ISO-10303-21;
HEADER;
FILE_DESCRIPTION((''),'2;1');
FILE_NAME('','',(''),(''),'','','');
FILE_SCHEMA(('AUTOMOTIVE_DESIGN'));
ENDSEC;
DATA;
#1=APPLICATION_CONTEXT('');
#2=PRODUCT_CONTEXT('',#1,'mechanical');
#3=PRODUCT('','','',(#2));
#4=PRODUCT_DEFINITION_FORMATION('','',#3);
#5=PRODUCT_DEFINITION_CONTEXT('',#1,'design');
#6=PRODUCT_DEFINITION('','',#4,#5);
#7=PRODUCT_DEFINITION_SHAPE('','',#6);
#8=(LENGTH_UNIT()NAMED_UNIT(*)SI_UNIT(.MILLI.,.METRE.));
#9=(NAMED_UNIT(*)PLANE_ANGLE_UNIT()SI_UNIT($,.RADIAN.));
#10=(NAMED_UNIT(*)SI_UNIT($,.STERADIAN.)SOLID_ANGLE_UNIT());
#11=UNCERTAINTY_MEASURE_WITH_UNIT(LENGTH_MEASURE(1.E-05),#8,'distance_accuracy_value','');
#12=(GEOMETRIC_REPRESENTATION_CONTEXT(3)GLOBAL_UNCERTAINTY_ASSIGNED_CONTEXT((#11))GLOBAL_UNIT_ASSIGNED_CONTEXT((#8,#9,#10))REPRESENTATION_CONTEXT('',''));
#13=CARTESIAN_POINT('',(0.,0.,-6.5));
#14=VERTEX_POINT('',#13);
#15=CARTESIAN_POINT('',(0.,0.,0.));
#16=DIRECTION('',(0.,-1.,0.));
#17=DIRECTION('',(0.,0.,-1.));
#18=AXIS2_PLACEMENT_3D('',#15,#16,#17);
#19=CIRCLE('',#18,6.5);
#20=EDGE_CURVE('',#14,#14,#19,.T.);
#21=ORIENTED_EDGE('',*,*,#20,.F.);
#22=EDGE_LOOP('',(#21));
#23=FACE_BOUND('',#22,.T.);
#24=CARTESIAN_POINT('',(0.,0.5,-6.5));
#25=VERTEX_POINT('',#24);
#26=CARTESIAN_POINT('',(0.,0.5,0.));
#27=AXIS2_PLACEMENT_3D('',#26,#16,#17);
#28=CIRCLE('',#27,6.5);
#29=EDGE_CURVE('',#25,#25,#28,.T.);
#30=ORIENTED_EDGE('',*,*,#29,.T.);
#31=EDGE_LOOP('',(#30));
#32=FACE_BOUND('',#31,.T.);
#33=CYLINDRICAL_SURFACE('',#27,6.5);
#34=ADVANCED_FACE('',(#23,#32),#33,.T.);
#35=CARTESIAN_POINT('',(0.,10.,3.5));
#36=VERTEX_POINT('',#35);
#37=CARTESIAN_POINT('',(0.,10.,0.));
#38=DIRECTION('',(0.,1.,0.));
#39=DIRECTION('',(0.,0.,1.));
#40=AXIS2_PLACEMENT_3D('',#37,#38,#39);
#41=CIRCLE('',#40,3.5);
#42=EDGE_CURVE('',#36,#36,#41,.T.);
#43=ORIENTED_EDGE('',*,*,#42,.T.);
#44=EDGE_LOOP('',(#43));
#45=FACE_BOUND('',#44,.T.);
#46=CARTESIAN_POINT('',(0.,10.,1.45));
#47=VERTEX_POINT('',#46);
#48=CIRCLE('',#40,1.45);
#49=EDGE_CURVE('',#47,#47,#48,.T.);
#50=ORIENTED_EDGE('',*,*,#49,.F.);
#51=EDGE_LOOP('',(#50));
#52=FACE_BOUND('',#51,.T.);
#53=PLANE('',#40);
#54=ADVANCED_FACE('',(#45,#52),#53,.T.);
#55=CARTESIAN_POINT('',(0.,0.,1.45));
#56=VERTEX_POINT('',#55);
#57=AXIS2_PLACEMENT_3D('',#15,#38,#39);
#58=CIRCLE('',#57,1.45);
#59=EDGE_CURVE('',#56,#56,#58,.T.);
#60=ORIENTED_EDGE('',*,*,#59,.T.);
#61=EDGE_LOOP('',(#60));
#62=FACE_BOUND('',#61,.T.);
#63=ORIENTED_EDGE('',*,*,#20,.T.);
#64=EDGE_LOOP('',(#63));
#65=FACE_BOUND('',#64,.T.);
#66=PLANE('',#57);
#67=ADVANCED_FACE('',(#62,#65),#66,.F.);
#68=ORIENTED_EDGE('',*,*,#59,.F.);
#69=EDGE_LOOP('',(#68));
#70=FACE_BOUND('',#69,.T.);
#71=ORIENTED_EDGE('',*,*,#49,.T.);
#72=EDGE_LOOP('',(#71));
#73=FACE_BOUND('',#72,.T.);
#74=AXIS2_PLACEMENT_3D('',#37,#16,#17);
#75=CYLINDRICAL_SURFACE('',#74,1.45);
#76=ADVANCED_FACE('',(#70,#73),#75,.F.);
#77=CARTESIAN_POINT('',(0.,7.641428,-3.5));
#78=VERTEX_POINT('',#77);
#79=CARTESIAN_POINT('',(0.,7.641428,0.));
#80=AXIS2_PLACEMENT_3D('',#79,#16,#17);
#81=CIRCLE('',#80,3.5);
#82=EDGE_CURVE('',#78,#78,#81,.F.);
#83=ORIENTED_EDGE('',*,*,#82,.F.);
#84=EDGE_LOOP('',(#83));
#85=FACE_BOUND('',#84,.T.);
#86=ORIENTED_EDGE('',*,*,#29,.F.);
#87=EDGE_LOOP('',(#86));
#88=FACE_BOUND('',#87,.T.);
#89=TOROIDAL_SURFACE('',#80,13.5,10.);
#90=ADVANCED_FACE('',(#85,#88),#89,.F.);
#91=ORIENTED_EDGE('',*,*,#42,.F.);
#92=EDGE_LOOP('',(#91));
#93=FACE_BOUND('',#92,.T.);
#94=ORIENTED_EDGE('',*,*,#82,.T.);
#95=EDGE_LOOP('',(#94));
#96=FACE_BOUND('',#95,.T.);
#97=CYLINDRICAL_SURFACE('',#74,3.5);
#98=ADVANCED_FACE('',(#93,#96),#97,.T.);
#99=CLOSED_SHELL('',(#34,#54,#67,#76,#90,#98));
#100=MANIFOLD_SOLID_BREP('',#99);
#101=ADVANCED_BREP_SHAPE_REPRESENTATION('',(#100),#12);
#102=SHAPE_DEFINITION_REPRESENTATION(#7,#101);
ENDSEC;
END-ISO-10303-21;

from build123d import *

# Parameters (mm, degrees)
SKETCH1_R           = 3.5
SKETCH1_R_2         = 1.45
BOSS_EXTRUDE1_DEPTH = 10
SKETCH2_R           = 6.5
SKETCH2_R_2         = 3.5
SKETCH2_R_3         = 1.45
BOSS_EXTRUDE2_DEPTH = 0.5
FILLET1_R           = 10


with BuildPart() as part:
    # Sketch1 → Boss-Extrude1 (new body)
    with BuildSketch(Plane(origin=(0, 0, 0), x_dir=(1, 0, 0), z_dir=(0, 1, 0))):
        with Locations(Location((0, 0, 0), (0, 0, 270))):
            Circle(SKETCH1_R)
        with Locations(Location((0, 0, 0), (0, 0, 270))):
            Circle(SKETCH1_R_2, mode=Mode.SUBTRACT)
    extrude(amount=BOSS_EXTRUDE1_DEPTH)

    # Sketch2 → Boss-Extrude2 (add)
    # profile 1 of 2: a face of its own
    with BuildSketch(Plane.XZ):
        with Locations(Location((0, 0, 0), (0, 0, 270))):
            Circle(SKETCH2_R)
        with Locations(Location((0, 0, 0), (0, 0, 270))):
            Circle(SKETCH2_R_2, mode=Mode.SUBTRACT)
    # profile 2 of 2: a face of its own
    with BuildSketch(Plane.XZ):
        with Locations(Location((0, 0, 0), (0, 0, 270))):
            Circle(SKETCH2_R_2)
        with Locations(Location((0, 0, 0), (0, 0, 90))):
            Circle(SKETCH2_R_3, mode=Mode.SUBTRACT)
    extrude(amount=-BOSS_EXTRUDE2_DEPTH)

    # Fillet1
    # the kernel refuses this fillet: 10 mm, written as the material it adds along each edge
    with BuildSketch(Plane(origin=(0, 0.5, 0), x_dir=(0, 0, 1), z_dir=(1, 0, 0))) as fillet1_piece_1:
        with BuildLine():
            CenterArc((13.5, -7.141428429), FILLET1_R, 134.427004001, 45.572995999)
            Line((3.5, -7.141428429), (3.3, -7.141428429))
            Line((3.3, -7.141428429), (3.3, 0))
            Line((3.3, 0), (3.5, 0.2))
            ThreePointArc((3.5, 0.2), (5, 0.2), (6.36, 0.142828569))
            Line((6.36, 0.142828569), (6.5, 0))
        make_face()
    revolve(axis=Axis((0, 0.5, 0), (0, -1, 0)))


solid = part.part
